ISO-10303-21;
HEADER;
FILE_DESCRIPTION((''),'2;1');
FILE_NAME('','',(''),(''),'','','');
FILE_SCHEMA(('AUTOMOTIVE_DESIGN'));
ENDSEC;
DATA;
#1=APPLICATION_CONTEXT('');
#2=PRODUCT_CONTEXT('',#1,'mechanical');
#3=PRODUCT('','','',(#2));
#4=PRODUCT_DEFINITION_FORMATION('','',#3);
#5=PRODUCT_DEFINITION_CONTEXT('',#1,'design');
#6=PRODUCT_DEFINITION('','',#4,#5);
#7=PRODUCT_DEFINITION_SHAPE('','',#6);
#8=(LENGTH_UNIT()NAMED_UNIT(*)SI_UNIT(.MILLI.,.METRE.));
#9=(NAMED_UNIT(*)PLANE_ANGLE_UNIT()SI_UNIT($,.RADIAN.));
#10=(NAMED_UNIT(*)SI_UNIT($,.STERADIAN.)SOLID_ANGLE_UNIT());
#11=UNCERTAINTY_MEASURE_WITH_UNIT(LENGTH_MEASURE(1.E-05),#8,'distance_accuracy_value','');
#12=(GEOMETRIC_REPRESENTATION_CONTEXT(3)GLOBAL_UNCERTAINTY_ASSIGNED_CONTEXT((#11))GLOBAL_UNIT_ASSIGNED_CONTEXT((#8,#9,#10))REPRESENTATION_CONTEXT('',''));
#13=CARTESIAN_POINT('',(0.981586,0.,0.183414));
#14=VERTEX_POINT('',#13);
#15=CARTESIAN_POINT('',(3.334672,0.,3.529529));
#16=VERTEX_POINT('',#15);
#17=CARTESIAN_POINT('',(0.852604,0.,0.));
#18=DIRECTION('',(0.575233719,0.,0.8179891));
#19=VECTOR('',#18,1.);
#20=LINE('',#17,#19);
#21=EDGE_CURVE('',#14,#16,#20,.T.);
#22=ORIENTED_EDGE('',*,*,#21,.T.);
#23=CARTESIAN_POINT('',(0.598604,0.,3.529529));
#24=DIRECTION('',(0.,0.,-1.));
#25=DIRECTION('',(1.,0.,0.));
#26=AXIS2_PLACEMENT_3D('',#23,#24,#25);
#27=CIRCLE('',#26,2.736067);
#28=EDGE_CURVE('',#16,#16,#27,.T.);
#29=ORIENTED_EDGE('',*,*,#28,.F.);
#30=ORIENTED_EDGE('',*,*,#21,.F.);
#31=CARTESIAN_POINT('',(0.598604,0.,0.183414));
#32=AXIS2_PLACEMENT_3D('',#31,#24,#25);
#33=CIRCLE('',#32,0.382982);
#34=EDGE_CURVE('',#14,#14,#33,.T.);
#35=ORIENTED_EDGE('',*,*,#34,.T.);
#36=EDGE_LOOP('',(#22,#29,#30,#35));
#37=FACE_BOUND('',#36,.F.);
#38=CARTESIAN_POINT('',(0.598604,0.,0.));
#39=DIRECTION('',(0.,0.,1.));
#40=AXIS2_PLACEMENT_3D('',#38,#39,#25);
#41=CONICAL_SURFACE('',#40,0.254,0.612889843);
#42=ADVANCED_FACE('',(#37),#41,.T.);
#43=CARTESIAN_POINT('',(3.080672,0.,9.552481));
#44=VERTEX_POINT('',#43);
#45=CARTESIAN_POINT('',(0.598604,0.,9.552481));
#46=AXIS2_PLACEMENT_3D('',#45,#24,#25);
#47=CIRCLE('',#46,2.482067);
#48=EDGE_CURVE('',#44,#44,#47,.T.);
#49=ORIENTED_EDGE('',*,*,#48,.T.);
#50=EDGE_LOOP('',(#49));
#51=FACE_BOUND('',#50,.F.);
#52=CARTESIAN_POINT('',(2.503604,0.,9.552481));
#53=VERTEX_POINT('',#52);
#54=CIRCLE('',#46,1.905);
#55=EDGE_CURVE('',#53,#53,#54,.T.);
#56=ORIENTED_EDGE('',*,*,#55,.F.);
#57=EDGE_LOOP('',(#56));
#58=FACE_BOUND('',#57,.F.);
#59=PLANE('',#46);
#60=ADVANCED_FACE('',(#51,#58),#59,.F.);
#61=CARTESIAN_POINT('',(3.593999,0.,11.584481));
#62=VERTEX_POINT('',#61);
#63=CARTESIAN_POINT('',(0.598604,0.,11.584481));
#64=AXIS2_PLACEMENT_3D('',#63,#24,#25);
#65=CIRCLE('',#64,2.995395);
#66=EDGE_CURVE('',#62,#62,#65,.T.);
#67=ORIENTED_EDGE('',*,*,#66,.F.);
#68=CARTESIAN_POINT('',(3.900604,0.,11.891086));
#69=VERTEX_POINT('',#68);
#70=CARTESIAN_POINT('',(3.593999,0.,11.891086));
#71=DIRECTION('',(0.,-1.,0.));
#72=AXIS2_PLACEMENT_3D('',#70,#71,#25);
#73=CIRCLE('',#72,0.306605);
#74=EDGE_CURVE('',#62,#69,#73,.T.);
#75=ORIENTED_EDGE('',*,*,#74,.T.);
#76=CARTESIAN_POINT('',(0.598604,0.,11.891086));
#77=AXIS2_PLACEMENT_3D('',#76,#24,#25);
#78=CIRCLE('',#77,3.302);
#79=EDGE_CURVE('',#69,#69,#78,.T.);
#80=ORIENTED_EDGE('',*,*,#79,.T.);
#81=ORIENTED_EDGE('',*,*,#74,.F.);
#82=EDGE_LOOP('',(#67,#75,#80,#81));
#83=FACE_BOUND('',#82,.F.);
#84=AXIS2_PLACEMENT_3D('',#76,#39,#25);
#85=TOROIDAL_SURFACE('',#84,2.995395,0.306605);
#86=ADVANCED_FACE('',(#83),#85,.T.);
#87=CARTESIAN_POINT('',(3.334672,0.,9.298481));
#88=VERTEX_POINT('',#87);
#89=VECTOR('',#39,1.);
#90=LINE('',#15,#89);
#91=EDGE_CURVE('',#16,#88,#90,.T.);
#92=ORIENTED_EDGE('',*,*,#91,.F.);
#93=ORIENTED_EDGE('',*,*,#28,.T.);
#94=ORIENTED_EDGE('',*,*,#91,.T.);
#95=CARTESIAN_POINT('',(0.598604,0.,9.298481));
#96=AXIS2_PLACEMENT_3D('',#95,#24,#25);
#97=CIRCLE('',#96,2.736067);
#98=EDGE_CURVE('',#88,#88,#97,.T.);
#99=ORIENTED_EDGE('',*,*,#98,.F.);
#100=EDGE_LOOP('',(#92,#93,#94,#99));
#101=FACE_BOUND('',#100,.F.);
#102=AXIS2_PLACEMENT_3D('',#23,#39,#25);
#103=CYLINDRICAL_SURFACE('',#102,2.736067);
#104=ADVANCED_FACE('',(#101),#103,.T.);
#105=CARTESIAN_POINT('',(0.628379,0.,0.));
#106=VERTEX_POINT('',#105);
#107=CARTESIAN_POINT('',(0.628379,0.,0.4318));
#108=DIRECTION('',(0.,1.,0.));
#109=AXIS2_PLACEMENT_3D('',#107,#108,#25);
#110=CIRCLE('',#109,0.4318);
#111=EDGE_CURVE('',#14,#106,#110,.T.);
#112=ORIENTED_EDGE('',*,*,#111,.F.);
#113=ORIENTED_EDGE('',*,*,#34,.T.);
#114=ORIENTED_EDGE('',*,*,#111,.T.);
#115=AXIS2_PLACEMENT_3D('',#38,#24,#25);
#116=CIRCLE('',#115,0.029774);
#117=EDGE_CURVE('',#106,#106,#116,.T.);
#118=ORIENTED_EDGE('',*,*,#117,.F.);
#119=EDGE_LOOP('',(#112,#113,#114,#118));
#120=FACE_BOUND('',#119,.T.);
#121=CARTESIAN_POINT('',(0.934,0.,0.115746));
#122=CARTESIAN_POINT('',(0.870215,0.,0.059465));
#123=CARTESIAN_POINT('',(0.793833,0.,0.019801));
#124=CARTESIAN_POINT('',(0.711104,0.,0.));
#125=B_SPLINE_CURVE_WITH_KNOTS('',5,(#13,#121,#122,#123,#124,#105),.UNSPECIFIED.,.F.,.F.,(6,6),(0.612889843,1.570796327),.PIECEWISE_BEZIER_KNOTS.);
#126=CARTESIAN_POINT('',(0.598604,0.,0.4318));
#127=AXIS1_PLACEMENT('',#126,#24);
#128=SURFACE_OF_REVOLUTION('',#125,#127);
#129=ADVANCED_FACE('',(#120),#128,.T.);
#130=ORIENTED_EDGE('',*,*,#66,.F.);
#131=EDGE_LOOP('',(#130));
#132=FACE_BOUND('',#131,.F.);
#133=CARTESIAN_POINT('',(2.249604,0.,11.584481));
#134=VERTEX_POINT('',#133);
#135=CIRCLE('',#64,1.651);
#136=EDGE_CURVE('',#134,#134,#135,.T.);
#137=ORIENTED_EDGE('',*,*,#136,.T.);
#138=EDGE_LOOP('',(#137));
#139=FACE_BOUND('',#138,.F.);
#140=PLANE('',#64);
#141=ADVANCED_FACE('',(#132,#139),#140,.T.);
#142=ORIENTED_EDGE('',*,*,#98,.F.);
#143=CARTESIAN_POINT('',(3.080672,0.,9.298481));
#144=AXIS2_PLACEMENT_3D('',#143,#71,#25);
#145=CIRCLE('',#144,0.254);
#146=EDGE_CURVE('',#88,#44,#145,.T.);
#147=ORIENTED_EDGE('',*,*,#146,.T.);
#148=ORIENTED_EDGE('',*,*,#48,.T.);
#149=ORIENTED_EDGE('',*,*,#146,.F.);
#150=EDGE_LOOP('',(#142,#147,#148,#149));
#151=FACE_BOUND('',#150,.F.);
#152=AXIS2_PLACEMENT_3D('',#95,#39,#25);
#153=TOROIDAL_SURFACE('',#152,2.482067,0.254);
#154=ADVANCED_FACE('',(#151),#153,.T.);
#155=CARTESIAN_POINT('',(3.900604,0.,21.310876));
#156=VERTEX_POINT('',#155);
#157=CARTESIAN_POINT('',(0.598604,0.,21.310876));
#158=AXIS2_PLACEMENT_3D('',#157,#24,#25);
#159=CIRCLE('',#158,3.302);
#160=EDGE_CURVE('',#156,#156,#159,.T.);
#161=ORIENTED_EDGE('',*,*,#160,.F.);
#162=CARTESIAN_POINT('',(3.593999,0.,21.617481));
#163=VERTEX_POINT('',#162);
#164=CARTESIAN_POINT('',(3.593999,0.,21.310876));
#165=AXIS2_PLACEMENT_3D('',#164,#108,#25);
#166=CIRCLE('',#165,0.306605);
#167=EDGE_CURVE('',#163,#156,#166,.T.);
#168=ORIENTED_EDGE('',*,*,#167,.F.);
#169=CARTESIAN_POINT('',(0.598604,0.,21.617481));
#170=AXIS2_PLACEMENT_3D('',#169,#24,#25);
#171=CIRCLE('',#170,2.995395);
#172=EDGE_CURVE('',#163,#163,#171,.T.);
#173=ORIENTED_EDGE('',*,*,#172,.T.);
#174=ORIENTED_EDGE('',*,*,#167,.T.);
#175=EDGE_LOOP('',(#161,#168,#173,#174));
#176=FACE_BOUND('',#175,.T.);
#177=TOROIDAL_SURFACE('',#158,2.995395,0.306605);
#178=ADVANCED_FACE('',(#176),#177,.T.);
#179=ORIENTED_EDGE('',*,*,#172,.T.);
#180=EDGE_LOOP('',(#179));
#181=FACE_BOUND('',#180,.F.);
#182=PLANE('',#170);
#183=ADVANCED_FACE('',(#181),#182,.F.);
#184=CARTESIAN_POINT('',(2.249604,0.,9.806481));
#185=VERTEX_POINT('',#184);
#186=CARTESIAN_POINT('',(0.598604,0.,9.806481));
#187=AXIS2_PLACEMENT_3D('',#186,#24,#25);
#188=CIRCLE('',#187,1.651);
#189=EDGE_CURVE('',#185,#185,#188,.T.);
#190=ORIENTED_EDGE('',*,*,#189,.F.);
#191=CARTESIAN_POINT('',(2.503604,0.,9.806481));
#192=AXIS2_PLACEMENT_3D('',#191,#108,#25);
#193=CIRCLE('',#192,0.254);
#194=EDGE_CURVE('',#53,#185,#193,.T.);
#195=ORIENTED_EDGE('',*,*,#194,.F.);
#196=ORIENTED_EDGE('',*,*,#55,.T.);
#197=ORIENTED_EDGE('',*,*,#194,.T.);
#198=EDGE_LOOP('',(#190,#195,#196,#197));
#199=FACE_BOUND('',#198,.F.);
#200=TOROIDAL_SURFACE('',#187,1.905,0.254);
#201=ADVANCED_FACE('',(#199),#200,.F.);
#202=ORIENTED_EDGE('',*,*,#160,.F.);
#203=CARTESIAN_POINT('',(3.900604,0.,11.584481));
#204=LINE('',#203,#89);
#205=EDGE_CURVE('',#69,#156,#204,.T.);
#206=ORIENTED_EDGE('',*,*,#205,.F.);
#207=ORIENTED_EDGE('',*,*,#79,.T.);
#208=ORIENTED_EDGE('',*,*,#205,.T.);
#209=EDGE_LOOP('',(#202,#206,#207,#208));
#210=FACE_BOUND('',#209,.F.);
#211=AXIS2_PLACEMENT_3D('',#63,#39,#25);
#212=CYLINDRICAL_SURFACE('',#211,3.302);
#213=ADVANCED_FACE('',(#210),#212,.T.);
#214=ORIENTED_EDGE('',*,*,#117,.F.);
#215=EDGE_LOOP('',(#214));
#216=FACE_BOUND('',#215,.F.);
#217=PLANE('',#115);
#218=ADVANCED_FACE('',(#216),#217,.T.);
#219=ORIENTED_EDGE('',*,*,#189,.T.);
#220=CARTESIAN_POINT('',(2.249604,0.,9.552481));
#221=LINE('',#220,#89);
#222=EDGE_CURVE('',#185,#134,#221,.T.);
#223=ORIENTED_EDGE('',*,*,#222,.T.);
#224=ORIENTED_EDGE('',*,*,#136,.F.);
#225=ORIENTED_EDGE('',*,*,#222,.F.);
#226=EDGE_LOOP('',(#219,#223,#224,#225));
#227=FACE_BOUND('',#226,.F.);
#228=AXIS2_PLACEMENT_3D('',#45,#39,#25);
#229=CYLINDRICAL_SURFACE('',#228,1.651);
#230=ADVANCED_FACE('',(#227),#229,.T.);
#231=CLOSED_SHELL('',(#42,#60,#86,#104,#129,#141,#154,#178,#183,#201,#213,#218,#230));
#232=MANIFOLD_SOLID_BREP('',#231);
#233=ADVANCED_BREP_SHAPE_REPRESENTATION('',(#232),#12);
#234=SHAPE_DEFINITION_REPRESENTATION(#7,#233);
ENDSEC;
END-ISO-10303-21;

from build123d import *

# Parameters (mm, degrees)
F2_R = 0.3066051224
F3_R = 0.4318
F4_R = 0.254


# Not quite as in the source:
# - a feature names something its author has since deleted; it is built from what else it names


with BuildPart() as f1:
    # F0 (on Front) → F1 (revolve)
    with BuildSketch(Plane.XZ):
        Polygon((3.9006043464, 21.6174807614), (0.5986043464, 21.6174807614), (0.5986043464, 0), (0.8526043464, 0), (3.3346717246, 3.5295289444), (3.3346717246, 9.5524807614), (2.2496043464, 9.5524807614), (2.2496043464, 11.5844807614), (3.9006043464, 11.5844807614), align=None)
    revolve(axis=Axis((0.5986043464, 0, 10.8087403807), (0, 0, -1)))

    # F2
    f2_edges = [f1.edges().sort_by_distance(p)[0] for p in [
        (-2.703396, 0, 21.617481),
        (-2.703396, 0, 11.584481),
    ]]
    fillet(f2_edges, radius=F2_R)

    # F3
    f3_edges = [f1.edges().sort_by_distance(p)[0] for p in [
        (0.344604, 0, 0),
    ]]
    fillet(f3_edges, radius=F3_R)

    # F4
    f4_edges = [f1.edges().sort_by_distance(p)[0] for p in [
        (-2.137463, 0, 9.552481),
        (-1.052396, 0, 9.552481),
    ]]
    fillet(f4_edges, radius=F4_R)


solid = f1.part
